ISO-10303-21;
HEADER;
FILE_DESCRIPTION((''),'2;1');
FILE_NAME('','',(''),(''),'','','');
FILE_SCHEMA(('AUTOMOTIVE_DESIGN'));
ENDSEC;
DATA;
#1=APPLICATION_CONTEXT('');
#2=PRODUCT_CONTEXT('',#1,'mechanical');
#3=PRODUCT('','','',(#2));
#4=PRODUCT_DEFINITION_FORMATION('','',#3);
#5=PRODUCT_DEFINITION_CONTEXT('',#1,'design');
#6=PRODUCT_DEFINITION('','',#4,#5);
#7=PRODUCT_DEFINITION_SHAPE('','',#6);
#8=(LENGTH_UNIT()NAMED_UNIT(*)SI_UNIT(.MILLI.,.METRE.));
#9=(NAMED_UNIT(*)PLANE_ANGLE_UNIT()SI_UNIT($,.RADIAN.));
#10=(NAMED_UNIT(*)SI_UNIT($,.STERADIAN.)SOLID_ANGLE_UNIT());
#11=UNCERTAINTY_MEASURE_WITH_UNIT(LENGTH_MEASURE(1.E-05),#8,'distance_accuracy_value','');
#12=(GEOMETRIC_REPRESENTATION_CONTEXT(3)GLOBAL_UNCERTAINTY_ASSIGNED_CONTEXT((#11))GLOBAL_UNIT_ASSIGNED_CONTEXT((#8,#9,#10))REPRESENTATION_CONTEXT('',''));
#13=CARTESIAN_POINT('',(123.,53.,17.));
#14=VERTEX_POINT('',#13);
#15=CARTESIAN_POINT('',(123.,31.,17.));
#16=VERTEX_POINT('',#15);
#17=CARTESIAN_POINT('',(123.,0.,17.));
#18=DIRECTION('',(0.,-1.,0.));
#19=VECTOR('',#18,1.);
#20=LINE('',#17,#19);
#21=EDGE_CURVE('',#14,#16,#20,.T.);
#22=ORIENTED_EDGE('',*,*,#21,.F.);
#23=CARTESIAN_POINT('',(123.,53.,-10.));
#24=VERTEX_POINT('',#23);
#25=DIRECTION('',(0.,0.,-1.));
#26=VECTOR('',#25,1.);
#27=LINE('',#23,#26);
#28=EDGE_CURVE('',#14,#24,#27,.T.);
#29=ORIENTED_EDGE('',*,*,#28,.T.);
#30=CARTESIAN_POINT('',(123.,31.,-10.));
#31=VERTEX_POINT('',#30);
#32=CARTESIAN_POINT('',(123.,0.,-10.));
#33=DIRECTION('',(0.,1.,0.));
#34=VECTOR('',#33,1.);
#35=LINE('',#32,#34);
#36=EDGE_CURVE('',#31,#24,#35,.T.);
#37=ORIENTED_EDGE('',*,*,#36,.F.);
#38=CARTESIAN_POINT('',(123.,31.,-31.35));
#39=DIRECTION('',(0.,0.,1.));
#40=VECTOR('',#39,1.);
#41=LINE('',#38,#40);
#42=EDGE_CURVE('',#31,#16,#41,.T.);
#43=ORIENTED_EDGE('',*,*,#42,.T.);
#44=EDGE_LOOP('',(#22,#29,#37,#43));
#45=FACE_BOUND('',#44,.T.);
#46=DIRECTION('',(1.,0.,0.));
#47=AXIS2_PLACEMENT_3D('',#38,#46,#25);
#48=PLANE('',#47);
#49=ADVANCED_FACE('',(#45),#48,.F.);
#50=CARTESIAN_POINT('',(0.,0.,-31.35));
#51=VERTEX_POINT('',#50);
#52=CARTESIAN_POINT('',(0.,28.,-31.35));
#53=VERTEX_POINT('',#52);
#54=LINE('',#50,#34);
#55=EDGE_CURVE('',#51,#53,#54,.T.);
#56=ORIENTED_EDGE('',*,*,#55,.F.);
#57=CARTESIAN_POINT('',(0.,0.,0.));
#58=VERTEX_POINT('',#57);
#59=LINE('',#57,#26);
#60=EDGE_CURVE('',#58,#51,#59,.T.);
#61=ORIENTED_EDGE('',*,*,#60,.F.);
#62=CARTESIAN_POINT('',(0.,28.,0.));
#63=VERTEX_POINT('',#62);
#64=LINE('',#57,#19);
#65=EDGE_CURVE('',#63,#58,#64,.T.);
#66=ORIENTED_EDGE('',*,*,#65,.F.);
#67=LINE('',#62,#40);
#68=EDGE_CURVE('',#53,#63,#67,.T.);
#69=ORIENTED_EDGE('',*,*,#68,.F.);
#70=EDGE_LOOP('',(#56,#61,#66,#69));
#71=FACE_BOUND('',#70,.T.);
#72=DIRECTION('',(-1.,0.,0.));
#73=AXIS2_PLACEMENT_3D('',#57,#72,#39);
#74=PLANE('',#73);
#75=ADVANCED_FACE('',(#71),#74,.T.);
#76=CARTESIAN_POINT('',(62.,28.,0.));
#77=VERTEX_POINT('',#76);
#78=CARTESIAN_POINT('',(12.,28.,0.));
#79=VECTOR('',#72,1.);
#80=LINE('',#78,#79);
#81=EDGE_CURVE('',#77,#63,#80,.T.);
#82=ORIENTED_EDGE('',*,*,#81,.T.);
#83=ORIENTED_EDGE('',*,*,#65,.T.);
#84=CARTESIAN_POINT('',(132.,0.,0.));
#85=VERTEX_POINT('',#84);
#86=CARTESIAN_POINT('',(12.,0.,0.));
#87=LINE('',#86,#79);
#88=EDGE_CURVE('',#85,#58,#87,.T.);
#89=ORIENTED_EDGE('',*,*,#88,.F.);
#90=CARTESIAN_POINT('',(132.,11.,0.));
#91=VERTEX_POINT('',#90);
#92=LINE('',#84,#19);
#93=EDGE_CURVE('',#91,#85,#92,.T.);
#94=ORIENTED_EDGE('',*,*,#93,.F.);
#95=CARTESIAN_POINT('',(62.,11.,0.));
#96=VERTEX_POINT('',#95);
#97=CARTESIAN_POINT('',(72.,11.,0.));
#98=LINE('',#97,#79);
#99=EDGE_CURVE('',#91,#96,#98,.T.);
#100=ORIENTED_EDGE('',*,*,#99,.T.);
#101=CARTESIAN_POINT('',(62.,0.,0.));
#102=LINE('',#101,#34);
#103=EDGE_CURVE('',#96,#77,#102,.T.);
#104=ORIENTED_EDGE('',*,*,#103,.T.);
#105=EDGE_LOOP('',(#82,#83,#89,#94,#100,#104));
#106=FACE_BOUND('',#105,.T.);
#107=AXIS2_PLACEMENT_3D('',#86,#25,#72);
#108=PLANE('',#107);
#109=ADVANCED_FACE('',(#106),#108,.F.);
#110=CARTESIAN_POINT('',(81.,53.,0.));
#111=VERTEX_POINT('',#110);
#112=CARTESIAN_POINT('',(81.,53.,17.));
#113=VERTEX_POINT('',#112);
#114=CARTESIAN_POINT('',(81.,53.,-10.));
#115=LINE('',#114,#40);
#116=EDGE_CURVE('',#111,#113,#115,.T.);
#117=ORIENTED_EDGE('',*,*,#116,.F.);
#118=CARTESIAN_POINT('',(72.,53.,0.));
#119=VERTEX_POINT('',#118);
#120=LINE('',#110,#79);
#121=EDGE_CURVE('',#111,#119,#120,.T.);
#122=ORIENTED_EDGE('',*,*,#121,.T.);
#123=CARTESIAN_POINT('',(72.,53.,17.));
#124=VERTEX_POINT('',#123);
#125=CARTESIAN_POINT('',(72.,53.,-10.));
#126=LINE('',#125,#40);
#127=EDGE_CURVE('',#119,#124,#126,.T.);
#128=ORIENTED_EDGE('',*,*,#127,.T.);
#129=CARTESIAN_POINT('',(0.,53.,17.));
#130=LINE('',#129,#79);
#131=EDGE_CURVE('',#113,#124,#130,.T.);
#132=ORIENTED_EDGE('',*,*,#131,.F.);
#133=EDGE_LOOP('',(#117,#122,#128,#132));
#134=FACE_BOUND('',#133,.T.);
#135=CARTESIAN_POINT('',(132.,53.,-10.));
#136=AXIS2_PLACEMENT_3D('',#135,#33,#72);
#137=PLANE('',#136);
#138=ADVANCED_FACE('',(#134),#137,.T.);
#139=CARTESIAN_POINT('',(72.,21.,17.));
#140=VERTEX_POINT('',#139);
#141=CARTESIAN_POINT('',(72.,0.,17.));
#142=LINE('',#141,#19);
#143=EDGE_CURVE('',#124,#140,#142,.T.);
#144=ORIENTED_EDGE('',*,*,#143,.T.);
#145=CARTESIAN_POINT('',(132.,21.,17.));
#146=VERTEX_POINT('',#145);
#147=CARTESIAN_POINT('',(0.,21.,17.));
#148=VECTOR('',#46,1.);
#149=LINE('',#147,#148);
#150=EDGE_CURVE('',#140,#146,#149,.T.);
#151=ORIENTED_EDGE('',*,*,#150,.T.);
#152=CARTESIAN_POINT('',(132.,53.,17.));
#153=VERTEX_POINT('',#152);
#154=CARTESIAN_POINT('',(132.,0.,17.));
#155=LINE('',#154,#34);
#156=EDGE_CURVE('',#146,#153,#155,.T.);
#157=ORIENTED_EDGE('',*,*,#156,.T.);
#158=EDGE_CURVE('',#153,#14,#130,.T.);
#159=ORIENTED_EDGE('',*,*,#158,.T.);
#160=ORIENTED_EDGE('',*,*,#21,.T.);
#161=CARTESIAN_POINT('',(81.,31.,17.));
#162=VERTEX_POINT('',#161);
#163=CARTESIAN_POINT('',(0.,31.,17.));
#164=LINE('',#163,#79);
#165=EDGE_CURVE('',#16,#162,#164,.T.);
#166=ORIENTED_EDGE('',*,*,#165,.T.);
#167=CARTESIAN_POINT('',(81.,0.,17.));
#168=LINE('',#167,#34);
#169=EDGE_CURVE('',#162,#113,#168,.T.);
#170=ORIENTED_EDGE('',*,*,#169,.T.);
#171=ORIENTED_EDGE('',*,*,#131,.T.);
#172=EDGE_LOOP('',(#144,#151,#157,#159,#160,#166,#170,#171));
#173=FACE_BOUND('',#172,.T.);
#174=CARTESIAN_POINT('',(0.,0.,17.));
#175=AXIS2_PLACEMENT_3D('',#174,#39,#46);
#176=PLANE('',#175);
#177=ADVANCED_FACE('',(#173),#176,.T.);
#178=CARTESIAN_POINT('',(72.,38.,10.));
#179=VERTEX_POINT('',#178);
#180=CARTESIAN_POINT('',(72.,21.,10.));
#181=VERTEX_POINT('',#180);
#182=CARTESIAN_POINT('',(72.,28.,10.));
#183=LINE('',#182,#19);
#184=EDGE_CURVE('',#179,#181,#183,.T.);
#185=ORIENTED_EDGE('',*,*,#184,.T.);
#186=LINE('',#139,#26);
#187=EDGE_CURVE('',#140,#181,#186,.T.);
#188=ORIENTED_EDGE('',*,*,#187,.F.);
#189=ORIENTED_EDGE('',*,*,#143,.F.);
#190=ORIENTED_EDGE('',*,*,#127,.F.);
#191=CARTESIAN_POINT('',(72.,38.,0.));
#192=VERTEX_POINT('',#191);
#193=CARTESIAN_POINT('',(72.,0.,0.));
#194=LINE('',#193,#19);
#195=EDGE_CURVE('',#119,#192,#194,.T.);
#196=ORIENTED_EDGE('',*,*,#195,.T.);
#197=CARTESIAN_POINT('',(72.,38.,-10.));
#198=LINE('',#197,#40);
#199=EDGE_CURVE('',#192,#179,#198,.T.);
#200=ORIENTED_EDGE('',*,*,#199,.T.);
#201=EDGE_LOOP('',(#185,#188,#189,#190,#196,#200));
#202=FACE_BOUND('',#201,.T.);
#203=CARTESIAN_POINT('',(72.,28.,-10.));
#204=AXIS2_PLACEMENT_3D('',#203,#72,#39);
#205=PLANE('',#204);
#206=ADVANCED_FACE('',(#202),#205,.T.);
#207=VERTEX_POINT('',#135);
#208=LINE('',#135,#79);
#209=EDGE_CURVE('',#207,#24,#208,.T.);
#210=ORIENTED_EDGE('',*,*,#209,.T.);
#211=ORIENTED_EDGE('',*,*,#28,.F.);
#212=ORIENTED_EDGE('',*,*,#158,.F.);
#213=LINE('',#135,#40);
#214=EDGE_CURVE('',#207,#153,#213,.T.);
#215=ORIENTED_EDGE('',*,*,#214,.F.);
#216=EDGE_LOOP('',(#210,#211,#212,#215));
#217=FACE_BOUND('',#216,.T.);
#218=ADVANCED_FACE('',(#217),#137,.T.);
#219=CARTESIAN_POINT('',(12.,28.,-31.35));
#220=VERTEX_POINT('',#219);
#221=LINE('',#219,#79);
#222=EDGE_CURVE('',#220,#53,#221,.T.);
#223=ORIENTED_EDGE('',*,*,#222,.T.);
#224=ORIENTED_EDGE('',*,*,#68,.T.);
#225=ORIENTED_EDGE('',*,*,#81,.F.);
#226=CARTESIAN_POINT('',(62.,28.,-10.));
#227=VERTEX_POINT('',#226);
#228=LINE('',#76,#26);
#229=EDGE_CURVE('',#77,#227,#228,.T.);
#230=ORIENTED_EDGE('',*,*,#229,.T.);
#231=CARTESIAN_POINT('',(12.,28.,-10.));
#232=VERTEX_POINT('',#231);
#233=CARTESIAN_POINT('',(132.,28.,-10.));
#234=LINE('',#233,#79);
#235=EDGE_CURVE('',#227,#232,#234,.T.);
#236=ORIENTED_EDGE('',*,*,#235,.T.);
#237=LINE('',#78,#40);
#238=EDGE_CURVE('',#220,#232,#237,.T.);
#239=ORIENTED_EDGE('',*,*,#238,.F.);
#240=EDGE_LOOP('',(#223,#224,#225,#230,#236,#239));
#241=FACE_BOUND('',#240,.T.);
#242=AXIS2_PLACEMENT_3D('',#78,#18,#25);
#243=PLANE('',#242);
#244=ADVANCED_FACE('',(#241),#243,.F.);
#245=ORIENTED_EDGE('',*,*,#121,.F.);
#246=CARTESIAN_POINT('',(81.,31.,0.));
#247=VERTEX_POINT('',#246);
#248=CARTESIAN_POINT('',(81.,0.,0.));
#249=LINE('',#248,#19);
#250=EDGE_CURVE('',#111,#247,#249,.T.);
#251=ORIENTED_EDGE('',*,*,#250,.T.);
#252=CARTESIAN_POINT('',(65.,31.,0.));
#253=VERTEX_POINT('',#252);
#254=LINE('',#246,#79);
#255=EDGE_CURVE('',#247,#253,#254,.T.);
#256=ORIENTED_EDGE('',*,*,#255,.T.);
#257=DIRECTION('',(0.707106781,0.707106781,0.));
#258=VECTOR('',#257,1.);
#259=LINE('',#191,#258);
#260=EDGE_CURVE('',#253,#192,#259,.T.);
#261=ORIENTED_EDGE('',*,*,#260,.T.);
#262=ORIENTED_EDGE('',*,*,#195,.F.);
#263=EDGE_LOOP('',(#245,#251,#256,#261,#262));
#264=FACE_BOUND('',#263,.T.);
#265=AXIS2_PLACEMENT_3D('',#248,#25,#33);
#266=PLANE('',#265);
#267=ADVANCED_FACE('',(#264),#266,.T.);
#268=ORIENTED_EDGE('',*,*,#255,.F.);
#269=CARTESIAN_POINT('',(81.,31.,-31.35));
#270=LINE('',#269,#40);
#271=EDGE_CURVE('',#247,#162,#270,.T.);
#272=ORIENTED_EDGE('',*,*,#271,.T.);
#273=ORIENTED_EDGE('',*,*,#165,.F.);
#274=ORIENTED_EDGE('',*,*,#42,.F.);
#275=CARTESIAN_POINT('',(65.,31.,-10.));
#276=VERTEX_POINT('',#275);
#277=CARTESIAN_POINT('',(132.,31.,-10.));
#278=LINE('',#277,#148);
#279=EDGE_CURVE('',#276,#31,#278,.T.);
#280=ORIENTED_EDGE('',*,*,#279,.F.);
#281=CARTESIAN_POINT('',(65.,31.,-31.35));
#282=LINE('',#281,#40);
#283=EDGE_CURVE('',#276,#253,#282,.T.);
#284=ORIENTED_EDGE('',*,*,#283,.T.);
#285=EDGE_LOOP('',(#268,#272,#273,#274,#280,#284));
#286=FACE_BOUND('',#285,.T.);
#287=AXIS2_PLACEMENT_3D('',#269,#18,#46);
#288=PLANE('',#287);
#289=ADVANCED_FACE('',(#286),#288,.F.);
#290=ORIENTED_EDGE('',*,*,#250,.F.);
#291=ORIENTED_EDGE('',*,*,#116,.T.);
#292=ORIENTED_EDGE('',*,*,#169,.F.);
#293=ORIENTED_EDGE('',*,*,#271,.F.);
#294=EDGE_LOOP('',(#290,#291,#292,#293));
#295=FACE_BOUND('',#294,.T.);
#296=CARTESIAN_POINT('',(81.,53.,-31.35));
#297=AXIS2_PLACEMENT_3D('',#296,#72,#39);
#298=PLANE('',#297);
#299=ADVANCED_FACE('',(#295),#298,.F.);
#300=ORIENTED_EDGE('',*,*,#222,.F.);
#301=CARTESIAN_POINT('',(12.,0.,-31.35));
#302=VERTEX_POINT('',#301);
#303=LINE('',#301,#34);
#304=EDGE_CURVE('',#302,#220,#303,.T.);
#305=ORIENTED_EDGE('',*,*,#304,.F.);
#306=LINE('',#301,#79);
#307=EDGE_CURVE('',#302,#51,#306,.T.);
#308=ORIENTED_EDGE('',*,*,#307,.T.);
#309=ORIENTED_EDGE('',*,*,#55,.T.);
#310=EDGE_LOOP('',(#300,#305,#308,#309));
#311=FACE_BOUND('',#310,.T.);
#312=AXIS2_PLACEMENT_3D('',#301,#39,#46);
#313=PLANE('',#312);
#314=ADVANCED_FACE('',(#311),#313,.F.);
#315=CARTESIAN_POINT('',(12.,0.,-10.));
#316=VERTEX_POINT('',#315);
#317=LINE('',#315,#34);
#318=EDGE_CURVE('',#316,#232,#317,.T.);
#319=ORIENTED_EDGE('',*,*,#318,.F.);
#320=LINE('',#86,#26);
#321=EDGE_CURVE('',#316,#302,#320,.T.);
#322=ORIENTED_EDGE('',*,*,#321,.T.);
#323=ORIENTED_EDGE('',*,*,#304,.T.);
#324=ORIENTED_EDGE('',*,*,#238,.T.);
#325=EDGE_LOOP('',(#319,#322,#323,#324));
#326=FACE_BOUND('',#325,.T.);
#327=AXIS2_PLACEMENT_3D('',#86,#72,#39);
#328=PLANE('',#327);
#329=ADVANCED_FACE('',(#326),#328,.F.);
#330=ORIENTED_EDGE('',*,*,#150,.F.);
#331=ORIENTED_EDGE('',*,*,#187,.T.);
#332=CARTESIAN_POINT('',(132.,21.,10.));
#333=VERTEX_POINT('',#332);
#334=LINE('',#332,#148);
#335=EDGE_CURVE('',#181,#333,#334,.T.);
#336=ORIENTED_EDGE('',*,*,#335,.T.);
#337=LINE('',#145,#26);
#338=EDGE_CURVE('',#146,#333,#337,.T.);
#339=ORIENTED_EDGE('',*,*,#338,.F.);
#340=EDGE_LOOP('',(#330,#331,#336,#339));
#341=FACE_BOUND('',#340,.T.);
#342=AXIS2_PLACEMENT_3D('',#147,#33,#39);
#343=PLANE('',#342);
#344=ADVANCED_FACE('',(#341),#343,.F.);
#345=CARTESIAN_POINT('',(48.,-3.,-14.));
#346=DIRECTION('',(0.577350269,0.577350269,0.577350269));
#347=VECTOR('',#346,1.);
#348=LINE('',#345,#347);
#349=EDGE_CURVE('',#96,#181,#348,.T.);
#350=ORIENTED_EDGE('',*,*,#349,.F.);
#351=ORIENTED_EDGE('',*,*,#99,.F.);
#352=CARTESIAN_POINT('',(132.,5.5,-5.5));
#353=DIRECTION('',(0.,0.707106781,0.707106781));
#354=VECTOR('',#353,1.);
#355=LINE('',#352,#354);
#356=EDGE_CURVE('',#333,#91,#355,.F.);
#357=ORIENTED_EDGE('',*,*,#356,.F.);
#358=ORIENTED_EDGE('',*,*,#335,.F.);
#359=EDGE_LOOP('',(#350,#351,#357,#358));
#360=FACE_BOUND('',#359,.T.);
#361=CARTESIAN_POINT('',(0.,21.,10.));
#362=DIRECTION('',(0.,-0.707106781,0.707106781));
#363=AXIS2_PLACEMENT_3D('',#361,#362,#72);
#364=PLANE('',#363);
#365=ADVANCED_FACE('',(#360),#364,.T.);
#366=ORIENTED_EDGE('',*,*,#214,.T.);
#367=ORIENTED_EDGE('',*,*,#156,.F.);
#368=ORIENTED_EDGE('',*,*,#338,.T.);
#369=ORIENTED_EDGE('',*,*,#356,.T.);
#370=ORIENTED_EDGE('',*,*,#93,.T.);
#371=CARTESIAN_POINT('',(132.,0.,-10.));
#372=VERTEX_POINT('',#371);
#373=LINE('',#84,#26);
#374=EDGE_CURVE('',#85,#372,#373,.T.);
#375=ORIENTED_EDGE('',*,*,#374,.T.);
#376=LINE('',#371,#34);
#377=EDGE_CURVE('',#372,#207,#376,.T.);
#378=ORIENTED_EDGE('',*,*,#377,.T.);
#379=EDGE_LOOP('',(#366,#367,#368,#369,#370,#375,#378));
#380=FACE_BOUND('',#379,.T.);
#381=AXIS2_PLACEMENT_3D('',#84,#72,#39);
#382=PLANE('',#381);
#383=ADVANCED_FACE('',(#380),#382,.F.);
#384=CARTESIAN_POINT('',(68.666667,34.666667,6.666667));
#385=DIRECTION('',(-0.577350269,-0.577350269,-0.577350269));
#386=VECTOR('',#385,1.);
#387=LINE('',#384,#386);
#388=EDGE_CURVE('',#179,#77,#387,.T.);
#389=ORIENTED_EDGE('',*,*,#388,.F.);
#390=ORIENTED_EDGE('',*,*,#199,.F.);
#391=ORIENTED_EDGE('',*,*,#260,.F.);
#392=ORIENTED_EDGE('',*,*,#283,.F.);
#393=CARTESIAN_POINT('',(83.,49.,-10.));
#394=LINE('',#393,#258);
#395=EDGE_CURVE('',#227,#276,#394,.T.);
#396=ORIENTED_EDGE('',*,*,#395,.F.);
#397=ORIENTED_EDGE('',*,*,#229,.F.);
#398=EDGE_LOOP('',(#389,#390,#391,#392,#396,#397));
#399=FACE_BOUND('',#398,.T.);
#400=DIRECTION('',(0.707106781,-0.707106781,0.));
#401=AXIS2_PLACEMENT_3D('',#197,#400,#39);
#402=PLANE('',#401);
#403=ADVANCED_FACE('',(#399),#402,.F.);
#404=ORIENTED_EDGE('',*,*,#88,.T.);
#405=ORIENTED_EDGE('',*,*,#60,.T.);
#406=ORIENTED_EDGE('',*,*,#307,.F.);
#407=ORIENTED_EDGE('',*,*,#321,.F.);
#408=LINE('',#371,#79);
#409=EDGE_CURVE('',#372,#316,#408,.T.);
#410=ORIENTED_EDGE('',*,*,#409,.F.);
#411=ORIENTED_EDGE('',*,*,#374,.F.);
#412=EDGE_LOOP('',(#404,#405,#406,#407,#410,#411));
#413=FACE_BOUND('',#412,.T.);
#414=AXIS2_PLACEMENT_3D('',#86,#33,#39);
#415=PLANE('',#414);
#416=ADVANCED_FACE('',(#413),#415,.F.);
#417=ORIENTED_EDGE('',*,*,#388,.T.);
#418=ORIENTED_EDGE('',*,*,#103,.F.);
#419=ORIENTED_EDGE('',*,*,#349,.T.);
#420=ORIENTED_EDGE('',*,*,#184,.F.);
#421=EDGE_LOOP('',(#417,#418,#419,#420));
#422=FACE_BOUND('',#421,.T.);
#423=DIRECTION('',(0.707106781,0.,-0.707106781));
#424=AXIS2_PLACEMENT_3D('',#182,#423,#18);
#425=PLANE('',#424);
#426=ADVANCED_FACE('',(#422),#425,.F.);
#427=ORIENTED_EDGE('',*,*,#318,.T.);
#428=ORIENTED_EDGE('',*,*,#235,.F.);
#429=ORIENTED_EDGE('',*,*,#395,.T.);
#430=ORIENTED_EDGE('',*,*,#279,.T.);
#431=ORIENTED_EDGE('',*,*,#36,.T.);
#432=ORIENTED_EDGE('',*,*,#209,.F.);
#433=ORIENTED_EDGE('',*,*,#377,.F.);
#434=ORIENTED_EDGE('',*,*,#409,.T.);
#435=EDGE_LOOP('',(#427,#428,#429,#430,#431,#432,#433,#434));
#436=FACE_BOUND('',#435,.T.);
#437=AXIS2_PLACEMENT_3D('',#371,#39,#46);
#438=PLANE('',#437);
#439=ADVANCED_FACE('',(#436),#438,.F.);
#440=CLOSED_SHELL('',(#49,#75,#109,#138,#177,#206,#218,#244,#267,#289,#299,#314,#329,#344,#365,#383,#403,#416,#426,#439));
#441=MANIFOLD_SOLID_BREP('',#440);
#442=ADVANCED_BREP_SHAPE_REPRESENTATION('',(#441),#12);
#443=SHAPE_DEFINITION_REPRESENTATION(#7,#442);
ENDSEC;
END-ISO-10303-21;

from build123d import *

# Parameters (mm, degrees)
SKETCH1_W           = 31.35
SKETCH1_H           = 28
BOSS_EXTRUDE1_DEPTH = 12
SKETCH2_W           = 10
SKETCH2_H           = 28
BOSS_EXTRUDE2_DEPTH = 120
SKETCH3_W           = 60
SKETCH3_H           = 25
BOSS_EXTRUDE3_DEPTH = 10
SKETCH4_W           = 42
SKETCH4_H           = 22
CUT_EXTRUDE1_DEPTH  = 146.656522339
BOSS_EXTRUDE4_DEPTH = 17
CHAMFER1_SIZE       = 10
SKETCH6_W           = 10
SKETCH6_H           = 22
CUT_EXTRUDE2_DEPTH  = 9
CHAMFER2_SIZE       = 10


with BuildPart() as part:
    # Sketch1 → Boss-Extrude1 (new body)
    with BuildSketch(Plane(origin=(0, 0, 0), x_dir=(0, 0, -1), z_dir=(1, 0, 0))):
        with Locations((15.675, 14)):
            Rectangle(SKETCH1_W, SKETCH1_H)
    extrude(amount=BOSS_EXTRUDE1_DEPTH)

    # Sketch2 → Boss-Extrude2 (add)
    with BuildSketch(Plane(origin=(12, 0, 0), x_dir=(0, 0, -1), z_dir=(1, 0, 0))):
        with Locations((5, 14)):
            Rectangle(SKETCH2_W, SKETCH2_H)
    extrude(amount=BOSS_EXTRUDE2_DEPTH)

    # Sketch3 → Boss-Extrude3 (add)
    with BuildSketch(Plane.XY):
        with Locations((102, 40.5)):
            Rectangle(SKETCH3_W, SKETCH3_H)
    extrude(amount=-BOSS_EXTRUDE3_DEPTH)

    # Sketch4 → Cut-Extrude1 (cut, through all)
    with BuildSketch(Plane.XY):
        with Locations((102, 42)):
            Rectangle(SKETCH4_W, SKETCH4_H)
    extrude(amount=-CUT_EXTRUDE1_DEPTH, mode=Mode.SUBTRACT)

    # Sketch5 → Boss-Extrude4 (add)
    with BuildSketch(Plane.XY):
        Polygon((81, 31), (81, 53), (72, 53), (72, 28), (72, 21), (132, 21), (132, 53), (123, 53), (123, 31), align=None)
    extrude(amount=BOSS_EXTRUDE4_DEPTH)

    # Chamfer1
    chamfer1_edges = [part.edges().sort_by_distance(p)[0] for p in [
        (72, 24.5, 0),
        (102, 21, 0),
    ]]
    chamfer(chamfer1_edges, length=CHAMFER1_SIZE)

    # Sketch6 → Cut-Extrude2 (cut)
    with BuildSketch(Plane.ZY.offset(-72)):
        with Locations((-5, 42)):
            Rectangle(SKETCH6_W, SKETCH6_H)
    extrude(amount=-CUT_EXTRUDE2_DEPTH, mode=Mode.SUBTRACT)

    # Chamfer2
    chamfer2_edges = [part.edges().sort_by_distance(p)[0] for p in [
        (72, 28, 0),
    ]]
    chamfer(chamfer2_edges, length=CHAMFER2_SIZE - 0.0001)  # a hair under: the kernel refuses the full size


solid = part.part
